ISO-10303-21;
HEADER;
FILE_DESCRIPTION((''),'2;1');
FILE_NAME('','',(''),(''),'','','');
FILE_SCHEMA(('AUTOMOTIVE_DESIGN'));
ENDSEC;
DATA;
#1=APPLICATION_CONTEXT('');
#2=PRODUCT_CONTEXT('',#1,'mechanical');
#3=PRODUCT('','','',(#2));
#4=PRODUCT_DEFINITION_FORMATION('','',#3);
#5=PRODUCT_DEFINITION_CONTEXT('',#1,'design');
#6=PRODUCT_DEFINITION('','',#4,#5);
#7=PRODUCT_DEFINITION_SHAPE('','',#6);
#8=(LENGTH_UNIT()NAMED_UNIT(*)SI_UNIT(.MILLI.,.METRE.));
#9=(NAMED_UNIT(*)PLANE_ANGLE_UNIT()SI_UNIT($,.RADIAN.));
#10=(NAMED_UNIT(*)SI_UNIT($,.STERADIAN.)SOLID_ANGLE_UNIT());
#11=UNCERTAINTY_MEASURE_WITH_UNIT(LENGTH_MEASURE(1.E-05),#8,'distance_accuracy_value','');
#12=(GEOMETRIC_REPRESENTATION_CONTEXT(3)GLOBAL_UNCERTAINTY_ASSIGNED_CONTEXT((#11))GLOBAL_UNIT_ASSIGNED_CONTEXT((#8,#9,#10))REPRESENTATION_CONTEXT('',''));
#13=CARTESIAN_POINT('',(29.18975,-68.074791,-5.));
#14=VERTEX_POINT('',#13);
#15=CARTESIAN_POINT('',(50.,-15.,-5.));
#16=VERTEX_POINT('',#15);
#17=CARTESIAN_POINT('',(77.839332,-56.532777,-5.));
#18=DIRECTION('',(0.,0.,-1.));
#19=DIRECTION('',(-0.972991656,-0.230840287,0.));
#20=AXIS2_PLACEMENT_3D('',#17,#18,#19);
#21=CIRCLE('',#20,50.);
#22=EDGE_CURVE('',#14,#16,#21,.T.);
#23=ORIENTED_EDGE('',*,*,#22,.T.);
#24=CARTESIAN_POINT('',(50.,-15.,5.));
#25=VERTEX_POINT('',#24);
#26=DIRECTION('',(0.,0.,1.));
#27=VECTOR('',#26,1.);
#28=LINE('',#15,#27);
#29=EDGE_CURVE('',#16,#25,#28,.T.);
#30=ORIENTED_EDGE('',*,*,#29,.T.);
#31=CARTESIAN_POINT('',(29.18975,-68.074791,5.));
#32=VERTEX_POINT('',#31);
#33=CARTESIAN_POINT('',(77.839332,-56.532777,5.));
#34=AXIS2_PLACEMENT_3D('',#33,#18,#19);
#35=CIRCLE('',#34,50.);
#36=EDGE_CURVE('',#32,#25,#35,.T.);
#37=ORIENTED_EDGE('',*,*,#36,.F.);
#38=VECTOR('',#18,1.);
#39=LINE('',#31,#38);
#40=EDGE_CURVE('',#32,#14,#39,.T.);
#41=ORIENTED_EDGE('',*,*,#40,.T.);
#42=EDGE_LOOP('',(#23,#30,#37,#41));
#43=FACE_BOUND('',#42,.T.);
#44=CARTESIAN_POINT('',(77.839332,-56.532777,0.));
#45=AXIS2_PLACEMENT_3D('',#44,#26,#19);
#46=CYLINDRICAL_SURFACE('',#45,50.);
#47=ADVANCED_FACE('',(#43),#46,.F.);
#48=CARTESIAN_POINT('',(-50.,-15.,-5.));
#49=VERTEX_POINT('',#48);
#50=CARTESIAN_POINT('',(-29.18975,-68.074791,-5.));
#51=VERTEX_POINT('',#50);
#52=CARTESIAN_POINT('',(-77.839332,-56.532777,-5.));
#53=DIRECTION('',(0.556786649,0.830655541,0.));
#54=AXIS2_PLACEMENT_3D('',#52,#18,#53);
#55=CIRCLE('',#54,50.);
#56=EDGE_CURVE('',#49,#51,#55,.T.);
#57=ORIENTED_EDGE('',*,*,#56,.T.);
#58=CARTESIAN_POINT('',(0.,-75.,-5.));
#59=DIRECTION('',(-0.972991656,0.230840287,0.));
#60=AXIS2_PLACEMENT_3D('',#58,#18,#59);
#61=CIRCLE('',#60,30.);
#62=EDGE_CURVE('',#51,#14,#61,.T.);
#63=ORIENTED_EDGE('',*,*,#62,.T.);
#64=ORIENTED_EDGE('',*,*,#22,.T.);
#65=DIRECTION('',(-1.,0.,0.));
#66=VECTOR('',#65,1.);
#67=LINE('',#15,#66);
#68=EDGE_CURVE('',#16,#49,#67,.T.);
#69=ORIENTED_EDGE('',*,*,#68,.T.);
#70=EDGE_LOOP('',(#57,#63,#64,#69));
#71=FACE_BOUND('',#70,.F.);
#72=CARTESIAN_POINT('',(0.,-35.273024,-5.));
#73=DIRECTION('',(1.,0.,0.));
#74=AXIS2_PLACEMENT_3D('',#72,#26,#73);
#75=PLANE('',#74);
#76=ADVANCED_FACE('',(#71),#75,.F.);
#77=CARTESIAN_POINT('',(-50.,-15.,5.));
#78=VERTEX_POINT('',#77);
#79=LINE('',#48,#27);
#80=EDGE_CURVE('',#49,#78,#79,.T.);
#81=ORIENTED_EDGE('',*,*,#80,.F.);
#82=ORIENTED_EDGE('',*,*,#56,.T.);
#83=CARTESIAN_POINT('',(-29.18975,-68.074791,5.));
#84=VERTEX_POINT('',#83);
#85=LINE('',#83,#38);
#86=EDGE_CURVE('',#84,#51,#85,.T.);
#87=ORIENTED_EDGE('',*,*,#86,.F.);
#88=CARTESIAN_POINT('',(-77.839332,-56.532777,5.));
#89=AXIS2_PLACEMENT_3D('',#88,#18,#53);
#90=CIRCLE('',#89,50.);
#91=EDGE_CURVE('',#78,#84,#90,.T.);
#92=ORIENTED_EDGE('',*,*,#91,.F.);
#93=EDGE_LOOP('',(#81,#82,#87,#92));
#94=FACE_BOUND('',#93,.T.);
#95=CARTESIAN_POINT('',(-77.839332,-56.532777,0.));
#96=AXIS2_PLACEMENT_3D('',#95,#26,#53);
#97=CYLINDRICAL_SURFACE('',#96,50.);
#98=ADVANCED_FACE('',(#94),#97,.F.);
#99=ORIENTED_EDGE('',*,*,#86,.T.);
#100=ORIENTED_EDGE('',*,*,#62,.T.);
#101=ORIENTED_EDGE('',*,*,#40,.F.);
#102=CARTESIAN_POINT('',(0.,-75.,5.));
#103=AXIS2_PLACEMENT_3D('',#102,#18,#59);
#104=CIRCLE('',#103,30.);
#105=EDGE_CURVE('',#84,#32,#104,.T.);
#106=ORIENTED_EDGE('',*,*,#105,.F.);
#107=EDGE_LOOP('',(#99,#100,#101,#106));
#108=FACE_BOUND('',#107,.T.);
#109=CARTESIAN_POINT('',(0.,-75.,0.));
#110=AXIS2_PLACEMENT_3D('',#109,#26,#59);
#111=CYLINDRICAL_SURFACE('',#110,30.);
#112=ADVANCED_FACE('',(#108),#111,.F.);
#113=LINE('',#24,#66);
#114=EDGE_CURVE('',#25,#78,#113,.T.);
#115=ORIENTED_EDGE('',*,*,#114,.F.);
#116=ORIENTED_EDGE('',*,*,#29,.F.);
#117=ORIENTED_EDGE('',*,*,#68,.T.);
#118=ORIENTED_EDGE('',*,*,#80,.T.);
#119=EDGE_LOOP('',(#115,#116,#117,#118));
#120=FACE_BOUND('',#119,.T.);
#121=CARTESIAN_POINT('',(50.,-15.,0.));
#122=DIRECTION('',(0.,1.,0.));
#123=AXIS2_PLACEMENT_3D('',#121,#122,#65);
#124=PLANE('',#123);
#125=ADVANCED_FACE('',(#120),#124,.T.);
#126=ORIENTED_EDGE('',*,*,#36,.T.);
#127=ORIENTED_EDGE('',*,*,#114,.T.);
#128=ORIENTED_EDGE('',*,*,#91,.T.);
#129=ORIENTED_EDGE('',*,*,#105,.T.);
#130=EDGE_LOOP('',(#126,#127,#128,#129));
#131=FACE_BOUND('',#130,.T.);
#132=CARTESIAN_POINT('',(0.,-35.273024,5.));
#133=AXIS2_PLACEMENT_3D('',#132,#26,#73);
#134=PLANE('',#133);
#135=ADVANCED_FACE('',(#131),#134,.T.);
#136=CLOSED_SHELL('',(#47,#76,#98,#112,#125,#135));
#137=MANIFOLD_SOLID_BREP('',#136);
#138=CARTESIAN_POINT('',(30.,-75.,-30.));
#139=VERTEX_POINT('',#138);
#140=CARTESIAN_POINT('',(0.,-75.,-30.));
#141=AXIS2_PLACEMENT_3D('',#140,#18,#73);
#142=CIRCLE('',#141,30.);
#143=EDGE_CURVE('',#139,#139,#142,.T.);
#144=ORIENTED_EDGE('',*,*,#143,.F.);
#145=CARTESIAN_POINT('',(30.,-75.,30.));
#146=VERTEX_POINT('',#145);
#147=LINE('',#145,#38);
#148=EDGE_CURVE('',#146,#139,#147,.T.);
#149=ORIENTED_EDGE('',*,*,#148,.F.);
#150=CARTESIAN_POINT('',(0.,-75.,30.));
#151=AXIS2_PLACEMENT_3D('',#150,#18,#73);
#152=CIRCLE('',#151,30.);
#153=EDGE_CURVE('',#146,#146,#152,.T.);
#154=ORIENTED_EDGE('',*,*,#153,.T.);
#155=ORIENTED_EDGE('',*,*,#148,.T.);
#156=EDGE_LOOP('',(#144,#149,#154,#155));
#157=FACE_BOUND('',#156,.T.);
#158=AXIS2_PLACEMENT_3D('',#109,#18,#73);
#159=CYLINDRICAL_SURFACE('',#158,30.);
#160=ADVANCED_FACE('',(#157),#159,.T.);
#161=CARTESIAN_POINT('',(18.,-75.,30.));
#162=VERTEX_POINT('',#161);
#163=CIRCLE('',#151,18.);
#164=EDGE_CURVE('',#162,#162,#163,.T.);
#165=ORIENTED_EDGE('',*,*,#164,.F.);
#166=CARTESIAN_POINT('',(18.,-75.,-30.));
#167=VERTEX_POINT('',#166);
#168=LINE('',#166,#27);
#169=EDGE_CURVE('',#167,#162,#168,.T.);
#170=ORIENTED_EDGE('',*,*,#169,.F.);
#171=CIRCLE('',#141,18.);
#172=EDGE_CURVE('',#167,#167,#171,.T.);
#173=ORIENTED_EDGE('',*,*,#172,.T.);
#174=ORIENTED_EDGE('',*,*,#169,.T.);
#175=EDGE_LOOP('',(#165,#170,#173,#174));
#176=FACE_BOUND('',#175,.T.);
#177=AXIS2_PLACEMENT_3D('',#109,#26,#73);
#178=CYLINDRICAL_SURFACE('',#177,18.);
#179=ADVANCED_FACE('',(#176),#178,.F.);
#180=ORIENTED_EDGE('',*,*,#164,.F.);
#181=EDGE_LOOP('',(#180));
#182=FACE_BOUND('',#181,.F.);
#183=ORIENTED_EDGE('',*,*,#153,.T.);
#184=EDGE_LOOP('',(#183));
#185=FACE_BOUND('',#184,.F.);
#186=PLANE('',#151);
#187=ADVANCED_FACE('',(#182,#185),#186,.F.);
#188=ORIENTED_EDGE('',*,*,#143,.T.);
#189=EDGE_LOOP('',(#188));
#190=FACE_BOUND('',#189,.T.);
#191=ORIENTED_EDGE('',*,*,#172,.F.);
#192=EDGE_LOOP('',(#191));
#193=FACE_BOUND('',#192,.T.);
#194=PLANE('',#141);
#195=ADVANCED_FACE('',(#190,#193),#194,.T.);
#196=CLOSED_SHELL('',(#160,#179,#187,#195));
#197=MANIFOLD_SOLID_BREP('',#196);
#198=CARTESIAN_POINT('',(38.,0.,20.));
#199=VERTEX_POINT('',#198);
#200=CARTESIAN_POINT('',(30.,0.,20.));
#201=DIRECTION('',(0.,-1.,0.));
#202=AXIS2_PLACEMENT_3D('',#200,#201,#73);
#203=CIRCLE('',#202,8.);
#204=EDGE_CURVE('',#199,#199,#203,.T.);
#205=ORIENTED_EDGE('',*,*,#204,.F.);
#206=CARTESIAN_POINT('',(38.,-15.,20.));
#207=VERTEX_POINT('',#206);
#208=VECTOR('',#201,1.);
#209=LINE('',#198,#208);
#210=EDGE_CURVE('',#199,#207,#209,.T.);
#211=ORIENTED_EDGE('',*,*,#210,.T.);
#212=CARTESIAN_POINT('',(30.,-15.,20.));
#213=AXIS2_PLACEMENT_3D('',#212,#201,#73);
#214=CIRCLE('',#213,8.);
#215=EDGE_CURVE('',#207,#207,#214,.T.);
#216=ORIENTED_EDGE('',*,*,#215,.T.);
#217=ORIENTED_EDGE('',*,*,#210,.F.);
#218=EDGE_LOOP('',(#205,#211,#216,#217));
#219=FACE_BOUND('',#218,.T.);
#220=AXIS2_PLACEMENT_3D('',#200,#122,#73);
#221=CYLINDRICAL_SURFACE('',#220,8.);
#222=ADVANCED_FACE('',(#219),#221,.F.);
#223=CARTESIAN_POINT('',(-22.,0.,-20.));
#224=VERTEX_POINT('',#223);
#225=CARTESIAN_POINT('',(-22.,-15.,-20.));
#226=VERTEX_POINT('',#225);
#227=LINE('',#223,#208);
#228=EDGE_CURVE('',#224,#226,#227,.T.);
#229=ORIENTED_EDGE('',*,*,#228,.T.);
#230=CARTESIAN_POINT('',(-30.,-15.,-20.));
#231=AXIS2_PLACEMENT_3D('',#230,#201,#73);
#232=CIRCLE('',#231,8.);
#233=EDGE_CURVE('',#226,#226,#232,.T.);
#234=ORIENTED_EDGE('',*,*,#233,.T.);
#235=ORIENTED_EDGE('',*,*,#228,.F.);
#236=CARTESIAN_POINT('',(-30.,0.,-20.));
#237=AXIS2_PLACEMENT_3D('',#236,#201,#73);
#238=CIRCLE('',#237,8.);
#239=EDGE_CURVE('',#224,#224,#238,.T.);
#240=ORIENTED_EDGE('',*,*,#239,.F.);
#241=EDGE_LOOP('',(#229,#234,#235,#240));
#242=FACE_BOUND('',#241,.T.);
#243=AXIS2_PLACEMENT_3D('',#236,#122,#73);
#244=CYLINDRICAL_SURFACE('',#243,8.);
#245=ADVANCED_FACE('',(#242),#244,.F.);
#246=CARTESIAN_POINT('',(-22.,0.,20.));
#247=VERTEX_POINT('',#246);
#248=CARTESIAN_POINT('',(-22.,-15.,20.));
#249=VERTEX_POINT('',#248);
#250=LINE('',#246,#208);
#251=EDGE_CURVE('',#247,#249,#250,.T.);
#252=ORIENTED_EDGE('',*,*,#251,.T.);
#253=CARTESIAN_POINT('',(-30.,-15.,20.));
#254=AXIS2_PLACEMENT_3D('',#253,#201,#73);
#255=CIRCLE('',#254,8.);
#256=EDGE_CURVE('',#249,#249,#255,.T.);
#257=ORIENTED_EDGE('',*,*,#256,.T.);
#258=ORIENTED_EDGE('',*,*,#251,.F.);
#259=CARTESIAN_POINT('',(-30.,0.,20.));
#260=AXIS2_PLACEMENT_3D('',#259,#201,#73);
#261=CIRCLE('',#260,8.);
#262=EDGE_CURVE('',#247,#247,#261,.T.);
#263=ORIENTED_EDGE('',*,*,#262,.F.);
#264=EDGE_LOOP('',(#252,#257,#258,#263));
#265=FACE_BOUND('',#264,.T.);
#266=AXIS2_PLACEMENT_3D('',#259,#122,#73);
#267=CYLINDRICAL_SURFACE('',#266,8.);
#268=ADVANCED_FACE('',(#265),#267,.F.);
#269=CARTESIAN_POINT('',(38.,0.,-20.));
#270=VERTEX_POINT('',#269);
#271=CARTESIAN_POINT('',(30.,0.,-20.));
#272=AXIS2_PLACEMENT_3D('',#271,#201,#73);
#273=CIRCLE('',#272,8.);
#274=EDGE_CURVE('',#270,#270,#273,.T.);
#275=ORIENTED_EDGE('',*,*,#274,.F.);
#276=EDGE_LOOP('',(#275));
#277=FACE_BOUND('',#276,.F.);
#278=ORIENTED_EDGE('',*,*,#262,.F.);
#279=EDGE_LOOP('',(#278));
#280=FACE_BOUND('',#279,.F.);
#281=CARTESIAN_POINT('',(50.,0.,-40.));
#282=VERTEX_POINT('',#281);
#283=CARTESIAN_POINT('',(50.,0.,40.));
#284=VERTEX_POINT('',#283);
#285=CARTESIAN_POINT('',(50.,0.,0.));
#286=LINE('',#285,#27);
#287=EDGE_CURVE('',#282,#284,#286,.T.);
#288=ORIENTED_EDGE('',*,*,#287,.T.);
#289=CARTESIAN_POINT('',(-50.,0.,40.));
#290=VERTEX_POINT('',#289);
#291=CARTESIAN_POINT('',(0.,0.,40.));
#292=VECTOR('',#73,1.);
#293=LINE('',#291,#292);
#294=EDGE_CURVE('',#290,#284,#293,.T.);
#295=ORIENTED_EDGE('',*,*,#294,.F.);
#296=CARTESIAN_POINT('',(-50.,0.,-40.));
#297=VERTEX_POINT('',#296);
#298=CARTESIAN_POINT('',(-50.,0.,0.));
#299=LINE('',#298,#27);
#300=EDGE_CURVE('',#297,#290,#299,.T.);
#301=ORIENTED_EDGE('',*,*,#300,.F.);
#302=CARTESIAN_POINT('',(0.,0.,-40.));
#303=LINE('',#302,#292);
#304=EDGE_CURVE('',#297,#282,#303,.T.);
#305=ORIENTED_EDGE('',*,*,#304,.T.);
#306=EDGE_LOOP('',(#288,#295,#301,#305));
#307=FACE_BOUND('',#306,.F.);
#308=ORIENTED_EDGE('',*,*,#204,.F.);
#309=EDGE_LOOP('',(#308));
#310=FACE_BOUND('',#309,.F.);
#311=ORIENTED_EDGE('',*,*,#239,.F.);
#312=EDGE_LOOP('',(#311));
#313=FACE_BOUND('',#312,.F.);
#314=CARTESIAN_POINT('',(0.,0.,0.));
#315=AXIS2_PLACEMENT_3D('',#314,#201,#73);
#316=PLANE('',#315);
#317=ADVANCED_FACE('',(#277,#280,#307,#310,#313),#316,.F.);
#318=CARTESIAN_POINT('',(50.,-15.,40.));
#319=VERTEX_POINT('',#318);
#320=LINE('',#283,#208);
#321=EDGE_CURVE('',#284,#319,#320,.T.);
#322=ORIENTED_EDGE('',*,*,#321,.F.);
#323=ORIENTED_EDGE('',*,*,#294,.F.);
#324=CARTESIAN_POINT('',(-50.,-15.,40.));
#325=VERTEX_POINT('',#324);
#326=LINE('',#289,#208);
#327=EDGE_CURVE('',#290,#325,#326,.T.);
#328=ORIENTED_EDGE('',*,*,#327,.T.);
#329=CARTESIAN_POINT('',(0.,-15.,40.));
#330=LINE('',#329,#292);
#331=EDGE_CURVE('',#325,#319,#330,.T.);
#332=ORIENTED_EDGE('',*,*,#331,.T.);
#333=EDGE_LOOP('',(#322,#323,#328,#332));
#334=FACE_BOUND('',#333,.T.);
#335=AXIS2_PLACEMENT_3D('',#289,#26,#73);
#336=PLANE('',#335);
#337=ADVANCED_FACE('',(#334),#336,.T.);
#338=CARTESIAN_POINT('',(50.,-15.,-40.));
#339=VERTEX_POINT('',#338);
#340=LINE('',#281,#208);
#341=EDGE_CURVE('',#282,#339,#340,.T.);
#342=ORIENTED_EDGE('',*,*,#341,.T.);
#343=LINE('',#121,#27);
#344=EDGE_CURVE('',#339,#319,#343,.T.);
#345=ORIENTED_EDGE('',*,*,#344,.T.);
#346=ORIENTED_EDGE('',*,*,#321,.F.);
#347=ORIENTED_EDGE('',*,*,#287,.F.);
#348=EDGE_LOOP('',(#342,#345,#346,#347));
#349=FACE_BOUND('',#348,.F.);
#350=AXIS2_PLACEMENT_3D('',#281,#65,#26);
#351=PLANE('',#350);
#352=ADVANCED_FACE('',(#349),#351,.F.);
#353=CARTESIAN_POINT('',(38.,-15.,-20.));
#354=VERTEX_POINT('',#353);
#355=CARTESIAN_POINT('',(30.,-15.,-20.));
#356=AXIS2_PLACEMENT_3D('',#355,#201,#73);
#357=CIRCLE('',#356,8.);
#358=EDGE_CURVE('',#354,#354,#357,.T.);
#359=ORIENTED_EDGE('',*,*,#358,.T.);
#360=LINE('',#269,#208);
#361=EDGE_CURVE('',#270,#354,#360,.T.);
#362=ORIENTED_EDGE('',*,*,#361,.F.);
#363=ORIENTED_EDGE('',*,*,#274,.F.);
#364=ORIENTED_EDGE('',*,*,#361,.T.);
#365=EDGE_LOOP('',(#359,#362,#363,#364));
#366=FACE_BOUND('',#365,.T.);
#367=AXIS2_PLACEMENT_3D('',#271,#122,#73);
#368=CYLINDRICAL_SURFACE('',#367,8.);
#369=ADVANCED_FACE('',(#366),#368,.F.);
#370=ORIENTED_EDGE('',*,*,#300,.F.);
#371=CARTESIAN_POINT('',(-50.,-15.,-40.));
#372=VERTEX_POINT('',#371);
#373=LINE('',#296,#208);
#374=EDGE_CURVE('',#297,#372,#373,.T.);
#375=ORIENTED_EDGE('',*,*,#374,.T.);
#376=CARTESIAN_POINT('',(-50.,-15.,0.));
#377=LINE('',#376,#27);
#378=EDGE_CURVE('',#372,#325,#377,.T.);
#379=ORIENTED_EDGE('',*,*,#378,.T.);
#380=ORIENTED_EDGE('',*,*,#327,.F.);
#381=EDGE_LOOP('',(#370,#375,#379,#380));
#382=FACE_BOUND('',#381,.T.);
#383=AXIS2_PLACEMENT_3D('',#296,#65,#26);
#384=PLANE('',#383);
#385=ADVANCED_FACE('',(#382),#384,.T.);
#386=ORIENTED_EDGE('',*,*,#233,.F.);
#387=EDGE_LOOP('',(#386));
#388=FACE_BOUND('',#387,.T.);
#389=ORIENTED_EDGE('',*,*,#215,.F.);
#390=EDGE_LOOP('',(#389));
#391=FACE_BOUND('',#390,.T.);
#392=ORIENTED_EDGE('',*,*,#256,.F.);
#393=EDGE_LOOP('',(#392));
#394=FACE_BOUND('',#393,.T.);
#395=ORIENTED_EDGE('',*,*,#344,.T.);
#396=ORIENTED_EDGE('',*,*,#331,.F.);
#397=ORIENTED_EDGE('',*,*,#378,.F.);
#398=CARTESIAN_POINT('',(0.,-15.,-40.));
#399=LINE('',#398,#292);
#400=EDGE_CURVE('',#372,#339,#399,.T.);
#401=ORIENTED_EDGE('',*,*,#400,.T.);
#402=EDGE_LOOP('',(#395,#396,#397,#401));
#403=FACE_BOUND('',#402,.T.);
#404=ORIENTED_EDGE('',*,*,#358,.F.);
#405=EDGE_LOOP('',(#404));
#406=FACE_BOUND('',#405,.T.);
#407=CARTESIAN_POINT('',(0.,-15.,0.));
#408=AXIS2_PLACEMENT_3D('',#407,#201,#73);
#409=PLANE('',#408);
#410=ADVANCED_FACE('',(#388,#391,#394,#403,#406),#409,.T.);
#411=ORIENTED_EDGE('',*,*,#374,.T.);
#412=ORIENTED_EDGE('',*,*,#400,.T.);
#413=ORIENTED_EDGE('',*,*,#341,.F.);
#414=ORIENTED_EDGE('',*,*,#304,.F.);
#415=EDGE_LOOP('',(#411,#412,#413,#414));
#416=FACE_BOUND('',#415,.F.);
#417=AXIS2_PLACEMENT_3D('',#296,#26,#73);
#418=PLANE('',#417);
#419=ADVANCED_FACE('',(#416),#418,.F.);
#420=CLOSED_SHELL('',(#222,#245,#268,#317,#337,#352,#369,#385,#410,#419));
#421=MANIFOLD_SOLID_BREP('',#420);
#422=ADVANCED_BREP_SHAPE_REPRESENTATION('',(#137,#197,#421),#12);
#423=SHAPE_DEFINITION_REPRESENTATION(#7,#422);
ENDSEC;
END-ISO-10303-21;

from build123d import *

# Parameters (mm, degrees)
F0_W     = 100
F0_H     = 80
F0_R     = 8
F1_DEPTH = 15
F3_R     = 30
F3_R_2   = 18
F4_DEPTH = 30
F6_DEPTH = 5


# Not quite as in the source:
# - a feature of the source that left no trace in its solid (it failed there, or was rolled back) is left out


with BuildPart() as f1:
    # F0 (on Front) → F1 (new body)
    with BuildSketch(Plane.XZ):
        Rectangle(F0_W, F0_H)
        with Locations((-30, -20)):
            Circle(F0_R, mode=Mode.SUBTRACT)
        with Locations((30, -20)):
            Circle(F0_R, mode=Mode.SUBTRACT)
        with Locations((-30, 20)):
            Circle(F0_R, mode=Mode.SUBTRACT)
        with Locations((30, 20)):
            Circle(F0_R, mode=Mode.SUBTRACT)
    extrude(amount=F1_DEPTH)


with BuildPart() as f4:
    # F3 (on offset) → F4 (new body, symmetric)
    with BuildSketch(Plane(origin=(0, 0, 0), x_dir=(1, 0, 0), z_dir=(0, 0, -1))):
        with Locations((0, 75)):
            Circle(F3_R)
        with Locations((0, 75)):
            Circle(F3_R_2, mode=Mode.SUBTRACT)
    extrude(amount=F4_DEPTH, both=True)


with BuildPart() as f6:
    # F5 (on Top) → F6 (new body, symmetric)
    with BuildSketch(Plane.XY):
        with BuildLine():
            ThreePointArc((29.1897496686, -68.0747913905), (31.2896610375, -38.2809801044), (50, -15))
            Line((50, -15), (-50, -15))
            ThreePointArc((-50, -15), (-31.2896610375, -38.2809801044), (-29.1897496686, -68.0747913905))
            ThreePointArc((-29.1897496686, -68.0747913905), (0, -45), (29.1897496686, -68.0747913905))
        make_face()
    extrude(amount=F6_DEPTH, both=True)


solid = Compound([f1.part, f4.part, f6.part])
